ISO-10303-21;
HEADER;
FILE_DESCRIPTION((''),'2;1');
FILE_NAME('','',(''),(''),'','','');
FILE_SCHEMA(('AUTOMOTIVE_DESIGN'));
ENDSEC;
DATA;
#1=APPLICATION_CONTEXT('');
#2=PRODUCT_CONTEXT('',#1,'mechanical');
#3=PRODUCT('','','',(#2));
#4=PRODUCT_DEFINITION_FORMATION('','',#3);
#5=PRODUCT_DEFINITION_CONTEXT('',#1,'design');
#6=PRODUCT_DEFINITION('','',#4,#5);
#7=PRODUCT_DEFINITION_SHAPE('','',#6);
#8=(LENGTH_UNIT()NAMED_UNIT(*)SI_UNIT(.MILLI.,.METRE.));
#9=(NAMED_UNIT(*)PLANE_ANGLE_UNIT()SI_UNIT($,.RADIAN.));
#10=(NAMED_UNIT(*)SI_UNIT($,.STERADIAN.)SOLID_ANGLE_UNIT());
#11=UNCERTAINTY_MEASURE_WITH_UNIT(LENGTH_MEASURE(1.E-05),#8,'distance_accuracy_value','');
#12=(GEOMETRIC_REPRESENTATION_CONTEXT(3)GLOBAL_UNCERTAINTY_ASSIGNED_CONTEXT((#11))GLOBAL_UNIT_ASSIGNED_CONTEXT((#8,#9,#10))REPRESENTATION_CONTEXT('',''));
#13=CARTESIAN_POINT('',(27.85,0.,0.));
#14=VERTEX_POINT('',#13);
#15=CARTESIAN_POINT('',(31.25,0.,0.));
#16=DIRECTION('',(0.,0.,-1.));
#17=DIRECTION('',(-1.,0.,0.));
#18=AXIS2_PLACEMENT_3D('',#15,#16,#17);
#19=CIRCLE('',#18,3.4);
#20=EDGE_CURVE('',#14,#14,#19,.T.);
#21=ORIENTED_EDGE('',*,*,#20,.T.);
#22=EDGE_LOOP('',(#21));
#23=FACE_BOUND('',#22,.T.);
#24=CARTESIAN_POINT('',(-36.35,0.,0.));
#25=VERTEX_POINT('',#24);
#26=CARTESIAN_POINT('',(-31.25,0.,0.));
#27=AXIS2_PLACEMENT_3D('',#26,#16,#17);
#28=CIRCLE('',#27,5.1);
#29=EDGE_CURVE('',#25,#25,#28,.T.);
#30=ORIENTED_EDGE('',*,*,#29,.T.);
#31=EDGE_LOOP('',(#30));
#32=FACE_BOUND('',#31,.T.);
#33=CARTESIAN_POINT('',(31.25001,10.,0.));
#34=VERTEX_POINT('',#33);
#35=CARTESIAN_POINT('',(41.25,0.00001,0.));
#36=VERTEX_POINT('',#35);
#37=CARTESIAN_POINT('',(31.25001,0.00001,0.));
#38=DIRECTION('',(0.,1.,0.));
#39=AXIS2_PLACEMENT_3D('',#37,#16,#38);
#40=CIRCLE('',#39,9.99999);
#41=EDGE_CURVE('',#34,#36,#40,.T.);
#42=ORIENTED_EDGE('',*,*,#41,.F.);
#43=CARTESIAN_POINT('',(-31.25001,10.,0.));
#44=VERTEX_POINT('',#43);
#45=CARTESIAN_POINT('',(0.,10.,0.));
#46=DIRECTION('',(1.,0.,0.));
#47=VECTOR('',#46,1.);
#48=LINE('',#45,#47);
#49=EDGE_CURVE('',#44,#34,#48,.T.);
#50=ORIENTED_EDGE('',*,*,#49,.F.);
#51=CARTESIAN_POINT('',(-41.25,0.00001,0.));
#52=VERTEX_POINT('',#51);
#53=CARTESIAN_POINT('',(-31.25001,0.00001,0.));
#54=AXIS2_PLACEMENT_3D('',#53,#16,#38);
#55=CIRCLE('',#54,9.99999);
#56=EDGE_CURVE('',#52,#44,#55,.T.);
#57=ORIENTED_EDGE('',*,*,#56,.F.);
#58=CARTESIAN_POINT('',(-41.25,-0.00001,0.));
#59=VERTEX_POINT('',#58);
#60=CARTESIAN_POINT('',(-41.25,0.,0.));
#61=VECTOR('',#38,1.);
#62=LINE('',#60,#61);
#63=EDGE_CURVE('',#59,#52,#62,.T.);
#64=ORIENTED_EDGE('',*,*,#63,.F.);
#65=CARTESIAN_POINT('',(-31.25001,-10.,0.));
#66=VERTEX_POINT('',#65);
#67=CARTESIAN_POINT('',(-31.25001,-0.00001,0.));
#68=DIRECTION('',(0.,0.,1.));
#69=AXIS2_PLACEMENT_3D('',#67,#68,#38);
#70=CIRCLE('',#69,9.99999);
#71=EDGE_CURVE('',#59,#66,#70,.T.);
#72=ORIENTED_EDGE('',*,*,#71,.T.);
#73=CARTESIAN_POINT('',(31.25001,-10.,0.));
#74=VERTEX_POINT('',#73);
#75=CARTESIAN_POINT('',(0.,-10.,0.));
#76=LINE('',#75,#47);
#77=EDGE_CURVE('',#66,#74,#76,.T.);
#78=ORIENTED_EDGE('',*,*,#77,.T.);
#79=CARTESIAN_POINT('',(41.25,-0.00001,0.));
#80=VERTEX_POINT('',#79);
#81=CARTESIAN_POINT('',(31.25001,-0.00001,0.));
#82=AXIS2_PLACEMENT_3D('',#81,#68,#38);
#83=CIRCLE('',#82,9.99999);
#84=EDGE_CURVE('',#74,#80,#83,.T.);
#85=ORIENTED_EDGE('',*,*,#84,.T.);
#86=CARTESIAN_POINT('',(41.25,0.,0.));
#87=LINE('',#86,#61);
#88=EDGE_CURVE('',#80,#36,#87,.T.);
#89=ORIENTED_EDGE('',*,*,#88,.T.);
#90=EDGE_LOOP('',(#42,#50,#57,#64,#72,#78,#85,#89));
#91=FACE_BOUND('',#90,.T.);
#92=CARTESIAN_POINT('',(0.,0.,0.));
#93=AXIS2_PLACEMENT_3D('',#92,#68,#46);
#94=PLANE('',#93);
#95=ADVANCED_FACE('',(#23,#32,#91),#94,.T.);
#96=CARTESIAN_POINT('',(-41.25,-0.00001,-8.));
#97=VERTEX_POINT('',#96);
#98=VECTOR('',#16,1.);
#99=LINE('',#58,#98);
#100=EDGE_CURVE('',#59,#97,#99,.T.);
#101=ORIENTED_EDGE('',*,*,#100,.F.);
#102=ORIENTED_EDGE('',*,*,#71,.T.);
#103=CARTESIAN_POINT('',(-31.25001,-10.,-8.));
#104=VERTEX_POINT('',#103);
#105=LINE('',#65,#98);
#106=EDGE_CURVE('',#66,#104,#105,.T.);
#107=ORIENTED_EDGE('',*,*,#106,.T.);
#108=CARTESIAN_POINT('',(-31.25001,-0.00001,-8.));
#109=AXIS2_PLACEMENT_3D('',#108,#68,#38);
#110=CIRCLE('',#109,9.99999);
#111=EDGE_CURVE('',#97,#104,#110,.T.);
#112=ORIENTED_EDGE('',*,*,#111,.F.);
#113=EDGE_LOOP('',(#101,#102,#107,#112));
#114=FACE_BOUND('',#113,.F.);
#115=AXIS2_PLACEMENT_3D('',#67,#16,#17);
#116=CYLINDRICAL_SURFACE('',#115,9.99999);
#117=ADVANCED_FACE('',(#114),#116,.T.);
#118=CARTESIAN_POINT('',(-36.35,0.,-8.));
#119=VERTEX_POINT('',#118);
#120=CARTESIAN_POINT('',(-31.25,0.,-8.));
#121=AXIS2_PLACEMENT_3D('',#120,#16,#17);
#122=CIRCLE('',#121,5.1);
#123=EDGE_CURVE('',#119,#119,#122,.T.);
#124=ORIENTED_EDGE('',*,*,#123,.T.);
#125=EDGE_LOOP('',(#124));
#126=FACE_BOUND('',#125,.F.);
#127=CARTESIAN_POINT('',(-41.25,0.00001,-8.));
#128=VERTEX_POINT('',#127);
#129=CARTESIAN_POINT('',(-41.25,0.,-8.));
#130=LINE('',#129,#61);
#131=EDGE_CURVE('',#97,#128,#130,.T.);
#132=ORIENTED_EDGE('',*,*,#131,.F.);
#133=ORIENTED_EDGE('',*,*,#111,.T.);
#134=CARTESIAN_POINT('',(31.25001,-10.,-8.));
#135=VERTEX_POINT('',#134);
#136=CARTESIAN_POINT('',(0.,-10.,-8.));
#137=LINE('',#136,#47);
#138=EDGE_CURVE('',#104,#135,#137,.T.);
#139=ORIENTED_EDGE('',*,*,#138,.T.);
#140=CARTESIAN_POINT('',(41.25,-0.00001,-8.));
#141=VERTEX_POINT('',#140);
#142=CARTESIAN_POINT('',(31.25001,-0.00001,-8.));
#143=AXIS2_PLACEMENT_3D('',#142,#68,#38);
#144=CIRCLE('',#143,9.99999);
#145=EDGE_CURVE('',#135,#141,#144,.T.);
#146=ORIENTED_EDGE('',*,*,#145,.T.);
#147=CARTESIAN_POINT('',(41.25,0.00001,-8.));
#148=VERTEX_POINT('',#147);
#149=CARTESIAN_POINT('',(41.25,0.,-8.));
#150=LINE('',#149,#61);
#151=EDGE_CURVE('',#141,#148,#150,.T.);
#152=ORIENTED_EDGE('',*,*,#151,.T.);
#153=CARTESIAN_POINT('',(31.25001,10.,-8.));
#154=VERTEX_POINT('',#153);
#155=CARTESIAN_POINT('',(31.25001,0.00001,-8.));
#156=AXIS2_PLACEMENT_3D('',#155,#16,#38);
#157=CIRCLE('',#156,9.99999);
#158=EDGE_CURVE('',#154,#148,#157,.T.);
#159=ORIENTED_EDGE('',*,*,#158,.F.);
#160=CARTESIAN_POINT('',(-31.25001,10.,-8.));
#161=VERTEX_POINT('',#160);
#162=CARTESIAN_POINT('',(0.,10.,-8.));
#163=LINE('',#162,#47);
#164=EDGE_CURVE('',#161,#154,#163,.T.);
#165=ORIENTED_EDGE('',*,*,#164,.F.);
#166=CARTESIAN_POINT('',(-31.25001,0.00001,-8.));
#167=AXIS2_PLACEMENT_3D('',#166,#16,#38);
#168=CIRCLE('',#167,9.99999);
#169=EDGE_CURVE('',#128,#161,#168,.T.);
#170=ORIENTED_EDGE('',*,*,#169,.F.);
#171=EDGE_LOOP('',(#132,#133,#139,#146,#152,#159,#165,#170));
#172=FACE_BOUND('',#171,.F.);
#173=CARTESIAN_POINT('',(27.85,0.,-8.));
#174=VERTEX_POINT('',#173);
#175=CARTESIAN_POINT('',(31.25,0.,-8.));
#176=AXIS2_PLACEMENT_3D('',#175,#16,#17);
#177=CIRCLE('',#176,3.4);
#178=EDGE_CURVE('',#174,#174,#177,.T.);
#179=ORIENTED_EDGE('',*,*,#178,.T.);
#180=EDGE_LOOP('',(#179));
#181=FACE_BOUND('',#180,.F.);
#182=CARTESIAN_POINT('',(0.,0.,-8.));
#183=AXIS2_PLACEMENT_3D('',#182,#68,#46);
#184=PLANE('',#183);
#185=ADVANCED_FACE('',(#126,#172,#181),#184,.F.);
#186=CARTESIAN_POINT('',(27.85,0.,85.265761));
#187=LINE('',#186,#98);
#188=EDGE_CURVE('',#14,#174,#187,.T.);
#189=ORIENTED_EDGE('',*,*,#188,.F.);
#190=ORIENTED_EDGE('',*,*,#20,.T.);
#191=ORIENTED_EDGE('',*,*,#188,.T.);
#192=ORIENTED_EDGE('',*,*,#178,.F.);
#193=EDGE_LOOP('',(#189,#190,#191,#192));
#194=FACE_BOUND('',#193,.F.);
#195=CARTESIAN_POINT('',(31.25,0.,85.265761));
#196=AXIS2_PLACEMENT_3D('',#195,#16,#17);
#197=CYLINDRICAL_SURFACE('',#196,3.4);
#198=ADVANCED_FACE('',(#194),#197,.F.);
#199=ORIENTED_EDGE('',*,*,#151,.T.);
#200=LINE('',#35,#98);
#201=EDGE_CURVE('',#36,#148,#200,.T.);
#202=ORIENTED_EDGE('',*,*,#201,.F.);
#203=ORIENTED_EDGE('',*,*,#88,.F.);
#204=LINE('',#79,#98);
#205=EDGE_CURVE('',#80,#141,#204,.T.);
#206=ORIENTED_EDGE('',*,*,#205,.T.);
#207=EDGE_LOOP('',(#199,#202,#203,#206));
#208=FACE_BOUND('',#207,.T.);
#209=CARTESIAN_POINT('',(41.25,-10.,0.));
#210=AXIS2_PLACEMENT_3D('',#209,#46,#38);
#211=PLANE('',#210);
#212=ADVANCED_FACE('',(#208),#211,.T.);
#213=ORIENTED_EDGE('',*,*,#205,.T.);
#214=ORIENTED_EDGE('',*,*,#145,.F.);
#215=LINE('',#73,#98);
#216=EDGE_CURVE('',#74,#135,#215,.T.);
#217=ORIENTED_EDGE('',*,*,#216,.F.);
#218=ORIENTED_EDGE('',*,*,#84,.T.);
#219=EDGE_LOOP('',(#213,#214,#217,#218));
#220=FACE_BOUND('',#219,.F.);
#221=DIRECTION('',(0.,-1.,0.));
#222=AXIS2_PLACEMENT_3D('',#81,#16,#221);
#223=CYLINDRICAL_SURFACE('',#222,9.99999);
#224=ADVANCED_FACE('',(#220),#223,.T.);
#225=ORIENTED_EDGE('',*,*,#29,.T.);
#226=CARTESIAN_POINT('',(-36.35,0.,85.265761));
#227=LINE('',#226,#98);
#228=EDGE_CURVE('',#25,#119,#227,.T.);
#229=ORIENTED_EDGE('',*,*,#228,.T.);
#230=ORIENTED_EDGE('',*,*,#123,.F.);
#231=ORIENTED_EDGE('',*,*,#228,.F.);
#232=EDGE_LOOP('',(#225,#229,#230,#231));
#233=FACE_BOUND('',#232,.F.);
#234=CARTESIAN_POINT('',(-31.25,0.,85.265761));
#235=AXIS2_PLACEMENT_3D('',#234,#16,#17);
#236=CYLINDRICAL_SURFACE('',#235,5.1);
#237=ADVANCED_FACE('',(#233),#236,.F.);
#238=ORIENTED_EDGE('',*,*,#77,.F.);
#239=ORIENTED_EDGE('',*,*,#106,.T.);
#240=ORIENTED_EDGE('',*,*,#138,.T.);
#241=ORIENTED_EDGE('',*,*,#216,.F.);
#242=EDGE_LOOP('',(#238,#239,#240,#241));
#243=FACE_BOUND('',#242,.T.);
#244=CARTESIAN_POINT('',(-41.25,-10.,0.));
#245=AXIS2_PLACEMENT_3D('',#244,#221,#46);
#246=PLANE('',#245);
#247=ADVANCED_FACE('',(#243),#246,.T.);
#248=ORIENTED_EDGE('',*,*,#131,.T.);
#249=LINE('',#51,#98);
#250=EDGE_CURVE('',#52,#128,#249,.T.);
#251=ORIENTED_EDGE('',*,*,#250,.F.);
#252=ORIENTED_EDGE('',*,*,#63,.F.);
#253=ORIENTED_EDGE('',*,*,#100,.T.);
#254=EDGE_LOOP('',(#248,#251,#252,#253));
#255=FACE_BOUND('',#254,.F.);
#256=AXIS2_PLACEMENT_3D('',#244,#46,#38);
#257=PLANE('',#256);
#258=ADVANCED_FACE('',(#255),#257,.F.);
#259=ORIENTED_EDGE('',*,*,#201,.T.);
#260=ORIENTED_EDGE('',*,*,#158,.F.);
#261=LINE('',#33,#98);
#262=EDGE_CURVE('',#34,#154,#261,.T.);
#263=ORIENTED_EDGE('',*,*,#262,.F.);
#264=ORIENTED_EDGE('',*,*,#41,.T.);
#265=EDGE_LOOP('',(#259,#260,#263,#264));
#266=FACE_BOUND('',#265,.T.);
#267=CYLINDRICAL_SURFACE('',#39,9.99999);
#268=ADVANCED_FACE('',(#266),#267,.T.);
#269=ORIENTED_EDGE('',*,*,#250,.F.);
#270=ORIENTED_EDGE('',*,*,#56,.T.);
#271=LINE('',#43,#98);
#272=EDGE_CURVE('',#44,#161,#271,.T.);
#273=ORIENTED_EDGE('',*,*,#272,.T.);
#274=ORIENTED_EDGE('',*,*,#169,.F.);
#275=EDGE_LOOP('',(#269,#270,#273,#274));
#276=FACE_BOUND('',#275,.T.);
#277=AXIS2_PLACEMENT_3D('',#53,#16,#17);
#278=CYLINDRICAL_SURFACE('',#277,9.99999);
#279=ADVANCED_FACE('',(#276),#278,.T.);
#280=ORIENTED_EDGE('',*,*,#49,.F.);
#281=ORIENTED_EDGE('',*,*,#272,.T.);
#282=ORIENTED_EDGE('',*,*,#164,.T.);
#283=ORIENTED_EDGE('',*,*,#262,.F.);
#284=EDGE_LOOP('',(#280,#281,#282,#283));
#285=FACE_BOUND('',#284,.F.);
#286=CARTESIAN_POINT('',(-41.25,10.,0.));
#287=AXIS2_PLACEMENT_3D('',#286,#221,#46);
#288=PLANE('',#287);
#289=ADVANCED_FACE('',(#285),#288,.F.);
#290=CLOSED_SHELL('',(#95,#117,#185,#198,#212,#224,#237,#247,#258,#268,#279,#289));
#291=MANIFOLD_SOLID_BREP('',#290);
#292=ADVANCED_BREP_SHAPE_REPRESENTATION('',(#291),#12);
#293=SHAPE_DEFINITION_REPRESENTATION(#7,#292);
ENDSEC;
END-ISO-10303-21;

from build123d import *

# Parameters (mm, degrees)
F0_W     = 82.5
F0_H     = 20
F1_DEPTH = 8
F2_D     = 10.2
F3_D     = 6.8
F4_R     = 9.99999


# Not quite as in the source:
# - a fillet or chamfer is up to 0.001 mm smaller than in the source, because OpenCascade refuses the exact size


with BuildPart() as f1:
    # F0 (on Top) → F1 (new body)
    with BuildSketch(Plane.XY):
        Rectangle(F0_W, F0_H)
    extrude(amount=-F1_DEPTH)

    # F2 (through all)
    with Locations(Plane.XY):
        with Locations((-31.25, 0)):
            Hole(F2_D / 2)

    # F3 (through all)
    with Locations(Plane.XY):
        with Locations((31.25, 0)):
            Hole(F3_D / 2)

    # F4 (radius 10 in the source; OpenCascade refuses exactly that, so slightly less here)
    f4_edges = [f1.edges().sort_by_distance(p)[0] for p in [
        (41.25, 10, -4),
        (41.25, -10, -4),
        (-41.25, 10, -4),
        (-41.25, -10, -4),
    ]]
    fillet(f4_edges, radius=F4_R)


solid = f1.part
